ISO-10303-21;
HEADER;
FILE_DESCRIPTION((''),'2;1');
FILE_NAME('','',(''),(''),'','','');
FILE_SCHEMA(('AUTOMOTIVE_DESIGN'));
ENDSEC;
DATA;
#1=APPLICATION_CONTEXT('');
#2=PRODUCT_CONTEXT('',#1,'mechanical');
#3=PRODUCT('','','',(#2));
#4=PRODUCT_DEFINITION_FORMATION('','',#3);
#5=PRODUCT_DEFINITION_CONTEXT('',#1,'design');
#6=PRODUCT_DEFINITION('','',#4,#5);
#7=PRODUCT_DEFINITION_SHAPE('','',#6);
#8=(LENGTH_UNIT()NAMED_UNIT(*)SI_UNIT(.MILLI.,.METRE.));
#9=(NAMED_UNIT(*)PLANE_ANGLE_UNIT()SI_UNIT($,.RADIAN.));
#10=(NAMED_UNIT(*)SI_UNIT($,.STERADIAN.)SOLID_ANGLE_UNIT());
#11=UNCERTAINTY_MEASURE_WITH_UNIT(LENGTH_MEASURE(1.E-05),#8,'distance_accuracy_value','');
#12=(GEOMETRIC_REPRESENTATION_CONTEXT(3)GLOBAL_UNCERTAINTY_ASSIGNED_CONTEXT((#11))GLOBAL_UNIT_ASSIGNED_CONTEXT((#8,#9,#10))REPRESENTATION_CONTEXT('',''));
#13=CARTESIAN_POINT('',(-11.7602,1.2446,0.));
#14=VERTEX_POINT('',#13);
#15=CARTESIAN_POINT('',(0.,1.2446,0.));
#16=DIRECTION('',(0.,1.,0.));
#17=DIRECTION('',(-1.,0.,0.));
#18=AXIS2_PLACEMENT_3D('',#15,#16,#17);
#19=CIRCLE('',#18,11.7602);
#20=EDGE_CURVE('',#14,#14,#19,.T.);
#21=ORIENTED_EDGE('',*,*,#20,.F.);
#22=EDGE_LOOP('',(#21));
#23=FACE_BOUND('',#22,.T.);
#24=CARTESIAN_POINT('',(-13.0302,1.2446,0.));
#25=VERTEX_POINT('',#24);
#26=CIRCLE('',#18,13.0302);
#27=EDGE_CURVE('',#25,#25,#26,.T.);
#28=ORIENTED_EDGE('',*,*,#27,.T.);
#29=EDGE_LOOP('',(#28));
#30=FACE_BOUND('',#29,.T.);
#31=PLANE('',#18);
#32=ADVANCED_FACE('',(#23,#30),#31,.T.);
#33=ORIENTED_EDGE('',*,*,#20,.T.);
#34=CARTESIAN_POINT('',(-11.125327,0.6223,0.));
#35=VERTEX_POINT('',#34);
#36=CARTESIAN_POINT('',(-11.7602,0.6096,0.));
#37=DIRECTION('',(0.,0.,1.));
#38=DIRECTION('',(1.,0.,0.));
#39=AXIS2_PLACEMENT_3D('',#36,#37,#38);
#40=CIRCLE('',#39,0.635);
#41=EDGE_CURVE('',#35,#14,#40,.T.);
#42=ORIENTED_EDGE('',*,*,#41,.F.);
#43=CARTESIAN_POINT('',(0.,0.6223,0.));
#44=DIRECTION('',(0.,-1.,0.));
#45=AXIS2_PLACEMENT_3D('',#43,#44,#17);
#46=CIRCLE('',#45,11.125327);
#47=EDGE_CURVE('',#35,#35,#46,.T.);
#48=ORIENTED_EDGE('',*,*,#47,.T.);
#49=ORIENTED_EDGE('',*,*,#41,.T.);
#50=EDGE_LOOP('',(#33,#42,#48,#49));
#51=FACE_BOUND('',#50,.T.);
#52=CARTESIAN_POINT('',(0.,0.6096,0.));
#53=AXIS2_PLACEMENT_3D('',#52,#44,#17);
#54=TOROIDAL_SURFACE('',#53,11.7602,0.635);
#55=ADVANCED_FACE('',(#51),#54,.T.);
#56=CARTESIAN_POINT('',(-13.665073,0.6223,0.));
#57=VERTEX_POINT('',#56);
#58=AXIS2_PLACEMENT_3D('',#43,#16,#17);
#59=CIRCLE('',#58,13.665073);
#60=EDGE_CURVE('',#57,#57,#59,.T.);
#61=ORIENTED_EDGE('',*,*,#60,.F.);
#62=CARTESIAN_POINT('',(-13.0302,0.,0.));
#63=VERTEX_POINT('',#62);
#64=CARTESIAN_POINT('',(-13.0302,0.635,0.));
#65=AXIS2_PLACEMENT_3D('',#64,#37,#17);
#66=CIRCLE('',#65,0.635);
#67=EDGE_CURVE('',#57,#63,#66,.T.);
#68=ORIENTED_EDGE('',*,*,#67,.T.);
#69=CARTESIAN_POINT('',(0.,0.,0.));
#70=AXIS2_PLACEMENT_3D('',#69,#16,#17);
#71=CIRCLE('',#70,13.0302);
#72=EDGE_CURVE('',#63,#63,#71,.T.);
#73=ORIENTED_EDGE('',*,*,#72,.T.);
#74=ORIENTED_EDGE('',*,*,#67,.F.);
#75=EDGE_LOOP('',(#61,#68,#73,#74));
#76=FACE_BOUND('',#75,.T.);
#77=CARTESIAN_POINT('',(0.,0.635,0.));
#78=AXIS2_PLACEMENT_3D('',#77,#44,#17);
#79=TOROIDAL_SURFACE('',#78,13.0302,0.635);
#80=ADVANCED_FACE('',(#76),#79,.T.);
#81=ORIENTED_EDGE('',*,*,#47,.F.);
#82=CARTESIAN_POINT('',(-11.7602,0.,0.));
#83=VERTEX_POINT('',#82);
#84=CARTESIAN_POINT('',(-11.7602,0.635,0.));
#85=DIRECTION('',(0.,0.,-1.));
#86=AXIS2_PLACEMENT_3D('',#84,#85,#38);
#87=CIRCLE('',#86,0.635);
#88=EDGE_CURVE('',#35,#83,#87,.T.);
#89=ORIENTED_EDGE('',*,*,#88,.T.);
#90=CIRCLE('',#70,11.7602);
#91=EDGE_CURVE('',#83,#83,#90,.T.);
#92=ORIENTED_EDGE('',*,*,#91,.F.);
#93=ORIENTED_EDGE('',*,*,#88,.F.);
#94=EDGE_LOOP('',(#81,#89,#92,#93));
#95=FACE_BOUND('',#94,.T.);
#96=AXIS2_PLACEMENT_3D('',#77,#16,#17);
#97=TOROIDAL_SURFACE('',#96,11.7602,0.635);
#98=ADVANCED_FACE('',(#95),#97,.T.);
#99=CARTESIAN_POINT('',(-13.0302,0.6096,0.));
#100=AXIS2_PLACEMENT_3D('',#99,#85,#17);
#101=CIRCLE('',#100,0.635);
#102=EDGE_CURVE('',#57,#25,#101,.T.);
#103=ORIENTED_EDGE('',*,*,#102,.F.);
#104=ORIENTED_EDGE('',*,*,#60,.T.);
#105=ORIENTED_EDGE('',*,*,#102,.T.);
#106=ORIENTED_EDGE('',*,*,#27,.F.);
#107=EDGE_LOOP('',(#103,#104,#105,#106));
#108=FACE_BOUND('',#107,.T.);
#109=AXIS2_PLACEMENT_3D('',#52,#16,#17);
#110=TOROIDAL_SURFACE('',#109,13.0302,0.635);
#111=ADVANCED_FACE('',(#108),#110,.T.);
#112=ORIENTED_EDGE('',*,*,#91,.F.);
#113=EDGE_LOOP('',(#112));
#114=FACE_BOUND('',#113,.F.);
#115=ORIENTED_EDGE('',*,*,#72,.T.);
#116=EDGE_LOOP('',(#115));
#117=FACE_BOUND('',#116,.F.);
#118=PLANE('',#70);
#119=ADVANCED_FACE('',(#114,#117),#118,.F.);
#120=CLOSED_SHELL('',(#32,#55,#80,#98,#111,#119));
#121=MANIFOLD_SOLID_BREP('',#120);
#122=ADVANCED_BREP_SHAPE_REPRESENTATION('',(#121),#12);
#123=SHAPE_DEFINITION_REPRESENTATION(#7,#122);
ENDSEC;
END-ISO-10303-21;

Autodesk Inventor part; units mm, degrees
ref_plane "YZ Plane" through (0, 0, 0) normal (1, 0, 0) x (0, 1, 0)
ref_plane "XZ Plane" through (0, 0, 0) normal (0, 1, 0) x (-1, 0, 0)
ref_plane "XY Plane" through (0, 0, 0) normal (0, 0, 1) x (1, 0, 0)
sketch "Sketch1" plane through (0, 0, 0) normal (0, 1, 0) x (-1, 0, 0)
  circle A0 centre (0, 0) radius 11.1252
  circle A1 centre (0, 0) radius 13.6652
  dimension "d0" = 22.2504
  dimension "d1" = 2.54
extrude "Extrusion1" add sketch "Sketch1" along normal blind 1.2446
fillet "Fillet1" radius 0.635 4 edges at (13.6652, 1.2446, 0) (11.1252, 1.2446, 0) (13.6652, 0, 0) (11.1252, 0, 0)
equation "\"d0\" = oRingID"
equation "\"d1\" = oRingGrooveWidth"
equation "\"d2\" = oRingGrooveDepth"
equation "\"tubeHeight\" = 50.8"
equation "\"tubeWidth\" = 152.4"
equation "\"tubeLength\" = 304.8"
equation "\"tubeWallThickness\" = 3.175"
equation "\"plateOverhang\" = 6.35"
equation "\"moatWidth\" = 3.175"
equation "\"moatDepth\" = 3.175"
equation "\"tubePlateClearance\" = 0.127"
equation "\"blankCapThickness\" = 9.525"
equation "\"sensorCapThickness\" = 12.7"
equation "\"glassTubeDiameter\" = 12.7"
equation "\"glassTubeClearance\" = 0.19844"
equation "\"longHoleSpacing\" = 30.48"
equation "\"shortHoleSpacing\" = 21.59"
equation "\"sensorHolderDiameter\" = 50.8"
equation "\"sensorHolderThickness\" = 12.7"
equation "\"fiberDiameter\" = 1"
equation "\"fiberClearance\" = 0"
equation "\"oRingID\" = 22.2504"
equation "\"oRingGrooveWidth\" = 2.54"
equation "\"oRingGrooveDepth\" = 1.2446"
equation "\"glassTubeLength\" = 279.4"
equation "\"glassTubeID\" = 7.874"
equation "\"sensorBoardHoleSpacing\" = 19"
properties part number "oRing" material "Rubber"
